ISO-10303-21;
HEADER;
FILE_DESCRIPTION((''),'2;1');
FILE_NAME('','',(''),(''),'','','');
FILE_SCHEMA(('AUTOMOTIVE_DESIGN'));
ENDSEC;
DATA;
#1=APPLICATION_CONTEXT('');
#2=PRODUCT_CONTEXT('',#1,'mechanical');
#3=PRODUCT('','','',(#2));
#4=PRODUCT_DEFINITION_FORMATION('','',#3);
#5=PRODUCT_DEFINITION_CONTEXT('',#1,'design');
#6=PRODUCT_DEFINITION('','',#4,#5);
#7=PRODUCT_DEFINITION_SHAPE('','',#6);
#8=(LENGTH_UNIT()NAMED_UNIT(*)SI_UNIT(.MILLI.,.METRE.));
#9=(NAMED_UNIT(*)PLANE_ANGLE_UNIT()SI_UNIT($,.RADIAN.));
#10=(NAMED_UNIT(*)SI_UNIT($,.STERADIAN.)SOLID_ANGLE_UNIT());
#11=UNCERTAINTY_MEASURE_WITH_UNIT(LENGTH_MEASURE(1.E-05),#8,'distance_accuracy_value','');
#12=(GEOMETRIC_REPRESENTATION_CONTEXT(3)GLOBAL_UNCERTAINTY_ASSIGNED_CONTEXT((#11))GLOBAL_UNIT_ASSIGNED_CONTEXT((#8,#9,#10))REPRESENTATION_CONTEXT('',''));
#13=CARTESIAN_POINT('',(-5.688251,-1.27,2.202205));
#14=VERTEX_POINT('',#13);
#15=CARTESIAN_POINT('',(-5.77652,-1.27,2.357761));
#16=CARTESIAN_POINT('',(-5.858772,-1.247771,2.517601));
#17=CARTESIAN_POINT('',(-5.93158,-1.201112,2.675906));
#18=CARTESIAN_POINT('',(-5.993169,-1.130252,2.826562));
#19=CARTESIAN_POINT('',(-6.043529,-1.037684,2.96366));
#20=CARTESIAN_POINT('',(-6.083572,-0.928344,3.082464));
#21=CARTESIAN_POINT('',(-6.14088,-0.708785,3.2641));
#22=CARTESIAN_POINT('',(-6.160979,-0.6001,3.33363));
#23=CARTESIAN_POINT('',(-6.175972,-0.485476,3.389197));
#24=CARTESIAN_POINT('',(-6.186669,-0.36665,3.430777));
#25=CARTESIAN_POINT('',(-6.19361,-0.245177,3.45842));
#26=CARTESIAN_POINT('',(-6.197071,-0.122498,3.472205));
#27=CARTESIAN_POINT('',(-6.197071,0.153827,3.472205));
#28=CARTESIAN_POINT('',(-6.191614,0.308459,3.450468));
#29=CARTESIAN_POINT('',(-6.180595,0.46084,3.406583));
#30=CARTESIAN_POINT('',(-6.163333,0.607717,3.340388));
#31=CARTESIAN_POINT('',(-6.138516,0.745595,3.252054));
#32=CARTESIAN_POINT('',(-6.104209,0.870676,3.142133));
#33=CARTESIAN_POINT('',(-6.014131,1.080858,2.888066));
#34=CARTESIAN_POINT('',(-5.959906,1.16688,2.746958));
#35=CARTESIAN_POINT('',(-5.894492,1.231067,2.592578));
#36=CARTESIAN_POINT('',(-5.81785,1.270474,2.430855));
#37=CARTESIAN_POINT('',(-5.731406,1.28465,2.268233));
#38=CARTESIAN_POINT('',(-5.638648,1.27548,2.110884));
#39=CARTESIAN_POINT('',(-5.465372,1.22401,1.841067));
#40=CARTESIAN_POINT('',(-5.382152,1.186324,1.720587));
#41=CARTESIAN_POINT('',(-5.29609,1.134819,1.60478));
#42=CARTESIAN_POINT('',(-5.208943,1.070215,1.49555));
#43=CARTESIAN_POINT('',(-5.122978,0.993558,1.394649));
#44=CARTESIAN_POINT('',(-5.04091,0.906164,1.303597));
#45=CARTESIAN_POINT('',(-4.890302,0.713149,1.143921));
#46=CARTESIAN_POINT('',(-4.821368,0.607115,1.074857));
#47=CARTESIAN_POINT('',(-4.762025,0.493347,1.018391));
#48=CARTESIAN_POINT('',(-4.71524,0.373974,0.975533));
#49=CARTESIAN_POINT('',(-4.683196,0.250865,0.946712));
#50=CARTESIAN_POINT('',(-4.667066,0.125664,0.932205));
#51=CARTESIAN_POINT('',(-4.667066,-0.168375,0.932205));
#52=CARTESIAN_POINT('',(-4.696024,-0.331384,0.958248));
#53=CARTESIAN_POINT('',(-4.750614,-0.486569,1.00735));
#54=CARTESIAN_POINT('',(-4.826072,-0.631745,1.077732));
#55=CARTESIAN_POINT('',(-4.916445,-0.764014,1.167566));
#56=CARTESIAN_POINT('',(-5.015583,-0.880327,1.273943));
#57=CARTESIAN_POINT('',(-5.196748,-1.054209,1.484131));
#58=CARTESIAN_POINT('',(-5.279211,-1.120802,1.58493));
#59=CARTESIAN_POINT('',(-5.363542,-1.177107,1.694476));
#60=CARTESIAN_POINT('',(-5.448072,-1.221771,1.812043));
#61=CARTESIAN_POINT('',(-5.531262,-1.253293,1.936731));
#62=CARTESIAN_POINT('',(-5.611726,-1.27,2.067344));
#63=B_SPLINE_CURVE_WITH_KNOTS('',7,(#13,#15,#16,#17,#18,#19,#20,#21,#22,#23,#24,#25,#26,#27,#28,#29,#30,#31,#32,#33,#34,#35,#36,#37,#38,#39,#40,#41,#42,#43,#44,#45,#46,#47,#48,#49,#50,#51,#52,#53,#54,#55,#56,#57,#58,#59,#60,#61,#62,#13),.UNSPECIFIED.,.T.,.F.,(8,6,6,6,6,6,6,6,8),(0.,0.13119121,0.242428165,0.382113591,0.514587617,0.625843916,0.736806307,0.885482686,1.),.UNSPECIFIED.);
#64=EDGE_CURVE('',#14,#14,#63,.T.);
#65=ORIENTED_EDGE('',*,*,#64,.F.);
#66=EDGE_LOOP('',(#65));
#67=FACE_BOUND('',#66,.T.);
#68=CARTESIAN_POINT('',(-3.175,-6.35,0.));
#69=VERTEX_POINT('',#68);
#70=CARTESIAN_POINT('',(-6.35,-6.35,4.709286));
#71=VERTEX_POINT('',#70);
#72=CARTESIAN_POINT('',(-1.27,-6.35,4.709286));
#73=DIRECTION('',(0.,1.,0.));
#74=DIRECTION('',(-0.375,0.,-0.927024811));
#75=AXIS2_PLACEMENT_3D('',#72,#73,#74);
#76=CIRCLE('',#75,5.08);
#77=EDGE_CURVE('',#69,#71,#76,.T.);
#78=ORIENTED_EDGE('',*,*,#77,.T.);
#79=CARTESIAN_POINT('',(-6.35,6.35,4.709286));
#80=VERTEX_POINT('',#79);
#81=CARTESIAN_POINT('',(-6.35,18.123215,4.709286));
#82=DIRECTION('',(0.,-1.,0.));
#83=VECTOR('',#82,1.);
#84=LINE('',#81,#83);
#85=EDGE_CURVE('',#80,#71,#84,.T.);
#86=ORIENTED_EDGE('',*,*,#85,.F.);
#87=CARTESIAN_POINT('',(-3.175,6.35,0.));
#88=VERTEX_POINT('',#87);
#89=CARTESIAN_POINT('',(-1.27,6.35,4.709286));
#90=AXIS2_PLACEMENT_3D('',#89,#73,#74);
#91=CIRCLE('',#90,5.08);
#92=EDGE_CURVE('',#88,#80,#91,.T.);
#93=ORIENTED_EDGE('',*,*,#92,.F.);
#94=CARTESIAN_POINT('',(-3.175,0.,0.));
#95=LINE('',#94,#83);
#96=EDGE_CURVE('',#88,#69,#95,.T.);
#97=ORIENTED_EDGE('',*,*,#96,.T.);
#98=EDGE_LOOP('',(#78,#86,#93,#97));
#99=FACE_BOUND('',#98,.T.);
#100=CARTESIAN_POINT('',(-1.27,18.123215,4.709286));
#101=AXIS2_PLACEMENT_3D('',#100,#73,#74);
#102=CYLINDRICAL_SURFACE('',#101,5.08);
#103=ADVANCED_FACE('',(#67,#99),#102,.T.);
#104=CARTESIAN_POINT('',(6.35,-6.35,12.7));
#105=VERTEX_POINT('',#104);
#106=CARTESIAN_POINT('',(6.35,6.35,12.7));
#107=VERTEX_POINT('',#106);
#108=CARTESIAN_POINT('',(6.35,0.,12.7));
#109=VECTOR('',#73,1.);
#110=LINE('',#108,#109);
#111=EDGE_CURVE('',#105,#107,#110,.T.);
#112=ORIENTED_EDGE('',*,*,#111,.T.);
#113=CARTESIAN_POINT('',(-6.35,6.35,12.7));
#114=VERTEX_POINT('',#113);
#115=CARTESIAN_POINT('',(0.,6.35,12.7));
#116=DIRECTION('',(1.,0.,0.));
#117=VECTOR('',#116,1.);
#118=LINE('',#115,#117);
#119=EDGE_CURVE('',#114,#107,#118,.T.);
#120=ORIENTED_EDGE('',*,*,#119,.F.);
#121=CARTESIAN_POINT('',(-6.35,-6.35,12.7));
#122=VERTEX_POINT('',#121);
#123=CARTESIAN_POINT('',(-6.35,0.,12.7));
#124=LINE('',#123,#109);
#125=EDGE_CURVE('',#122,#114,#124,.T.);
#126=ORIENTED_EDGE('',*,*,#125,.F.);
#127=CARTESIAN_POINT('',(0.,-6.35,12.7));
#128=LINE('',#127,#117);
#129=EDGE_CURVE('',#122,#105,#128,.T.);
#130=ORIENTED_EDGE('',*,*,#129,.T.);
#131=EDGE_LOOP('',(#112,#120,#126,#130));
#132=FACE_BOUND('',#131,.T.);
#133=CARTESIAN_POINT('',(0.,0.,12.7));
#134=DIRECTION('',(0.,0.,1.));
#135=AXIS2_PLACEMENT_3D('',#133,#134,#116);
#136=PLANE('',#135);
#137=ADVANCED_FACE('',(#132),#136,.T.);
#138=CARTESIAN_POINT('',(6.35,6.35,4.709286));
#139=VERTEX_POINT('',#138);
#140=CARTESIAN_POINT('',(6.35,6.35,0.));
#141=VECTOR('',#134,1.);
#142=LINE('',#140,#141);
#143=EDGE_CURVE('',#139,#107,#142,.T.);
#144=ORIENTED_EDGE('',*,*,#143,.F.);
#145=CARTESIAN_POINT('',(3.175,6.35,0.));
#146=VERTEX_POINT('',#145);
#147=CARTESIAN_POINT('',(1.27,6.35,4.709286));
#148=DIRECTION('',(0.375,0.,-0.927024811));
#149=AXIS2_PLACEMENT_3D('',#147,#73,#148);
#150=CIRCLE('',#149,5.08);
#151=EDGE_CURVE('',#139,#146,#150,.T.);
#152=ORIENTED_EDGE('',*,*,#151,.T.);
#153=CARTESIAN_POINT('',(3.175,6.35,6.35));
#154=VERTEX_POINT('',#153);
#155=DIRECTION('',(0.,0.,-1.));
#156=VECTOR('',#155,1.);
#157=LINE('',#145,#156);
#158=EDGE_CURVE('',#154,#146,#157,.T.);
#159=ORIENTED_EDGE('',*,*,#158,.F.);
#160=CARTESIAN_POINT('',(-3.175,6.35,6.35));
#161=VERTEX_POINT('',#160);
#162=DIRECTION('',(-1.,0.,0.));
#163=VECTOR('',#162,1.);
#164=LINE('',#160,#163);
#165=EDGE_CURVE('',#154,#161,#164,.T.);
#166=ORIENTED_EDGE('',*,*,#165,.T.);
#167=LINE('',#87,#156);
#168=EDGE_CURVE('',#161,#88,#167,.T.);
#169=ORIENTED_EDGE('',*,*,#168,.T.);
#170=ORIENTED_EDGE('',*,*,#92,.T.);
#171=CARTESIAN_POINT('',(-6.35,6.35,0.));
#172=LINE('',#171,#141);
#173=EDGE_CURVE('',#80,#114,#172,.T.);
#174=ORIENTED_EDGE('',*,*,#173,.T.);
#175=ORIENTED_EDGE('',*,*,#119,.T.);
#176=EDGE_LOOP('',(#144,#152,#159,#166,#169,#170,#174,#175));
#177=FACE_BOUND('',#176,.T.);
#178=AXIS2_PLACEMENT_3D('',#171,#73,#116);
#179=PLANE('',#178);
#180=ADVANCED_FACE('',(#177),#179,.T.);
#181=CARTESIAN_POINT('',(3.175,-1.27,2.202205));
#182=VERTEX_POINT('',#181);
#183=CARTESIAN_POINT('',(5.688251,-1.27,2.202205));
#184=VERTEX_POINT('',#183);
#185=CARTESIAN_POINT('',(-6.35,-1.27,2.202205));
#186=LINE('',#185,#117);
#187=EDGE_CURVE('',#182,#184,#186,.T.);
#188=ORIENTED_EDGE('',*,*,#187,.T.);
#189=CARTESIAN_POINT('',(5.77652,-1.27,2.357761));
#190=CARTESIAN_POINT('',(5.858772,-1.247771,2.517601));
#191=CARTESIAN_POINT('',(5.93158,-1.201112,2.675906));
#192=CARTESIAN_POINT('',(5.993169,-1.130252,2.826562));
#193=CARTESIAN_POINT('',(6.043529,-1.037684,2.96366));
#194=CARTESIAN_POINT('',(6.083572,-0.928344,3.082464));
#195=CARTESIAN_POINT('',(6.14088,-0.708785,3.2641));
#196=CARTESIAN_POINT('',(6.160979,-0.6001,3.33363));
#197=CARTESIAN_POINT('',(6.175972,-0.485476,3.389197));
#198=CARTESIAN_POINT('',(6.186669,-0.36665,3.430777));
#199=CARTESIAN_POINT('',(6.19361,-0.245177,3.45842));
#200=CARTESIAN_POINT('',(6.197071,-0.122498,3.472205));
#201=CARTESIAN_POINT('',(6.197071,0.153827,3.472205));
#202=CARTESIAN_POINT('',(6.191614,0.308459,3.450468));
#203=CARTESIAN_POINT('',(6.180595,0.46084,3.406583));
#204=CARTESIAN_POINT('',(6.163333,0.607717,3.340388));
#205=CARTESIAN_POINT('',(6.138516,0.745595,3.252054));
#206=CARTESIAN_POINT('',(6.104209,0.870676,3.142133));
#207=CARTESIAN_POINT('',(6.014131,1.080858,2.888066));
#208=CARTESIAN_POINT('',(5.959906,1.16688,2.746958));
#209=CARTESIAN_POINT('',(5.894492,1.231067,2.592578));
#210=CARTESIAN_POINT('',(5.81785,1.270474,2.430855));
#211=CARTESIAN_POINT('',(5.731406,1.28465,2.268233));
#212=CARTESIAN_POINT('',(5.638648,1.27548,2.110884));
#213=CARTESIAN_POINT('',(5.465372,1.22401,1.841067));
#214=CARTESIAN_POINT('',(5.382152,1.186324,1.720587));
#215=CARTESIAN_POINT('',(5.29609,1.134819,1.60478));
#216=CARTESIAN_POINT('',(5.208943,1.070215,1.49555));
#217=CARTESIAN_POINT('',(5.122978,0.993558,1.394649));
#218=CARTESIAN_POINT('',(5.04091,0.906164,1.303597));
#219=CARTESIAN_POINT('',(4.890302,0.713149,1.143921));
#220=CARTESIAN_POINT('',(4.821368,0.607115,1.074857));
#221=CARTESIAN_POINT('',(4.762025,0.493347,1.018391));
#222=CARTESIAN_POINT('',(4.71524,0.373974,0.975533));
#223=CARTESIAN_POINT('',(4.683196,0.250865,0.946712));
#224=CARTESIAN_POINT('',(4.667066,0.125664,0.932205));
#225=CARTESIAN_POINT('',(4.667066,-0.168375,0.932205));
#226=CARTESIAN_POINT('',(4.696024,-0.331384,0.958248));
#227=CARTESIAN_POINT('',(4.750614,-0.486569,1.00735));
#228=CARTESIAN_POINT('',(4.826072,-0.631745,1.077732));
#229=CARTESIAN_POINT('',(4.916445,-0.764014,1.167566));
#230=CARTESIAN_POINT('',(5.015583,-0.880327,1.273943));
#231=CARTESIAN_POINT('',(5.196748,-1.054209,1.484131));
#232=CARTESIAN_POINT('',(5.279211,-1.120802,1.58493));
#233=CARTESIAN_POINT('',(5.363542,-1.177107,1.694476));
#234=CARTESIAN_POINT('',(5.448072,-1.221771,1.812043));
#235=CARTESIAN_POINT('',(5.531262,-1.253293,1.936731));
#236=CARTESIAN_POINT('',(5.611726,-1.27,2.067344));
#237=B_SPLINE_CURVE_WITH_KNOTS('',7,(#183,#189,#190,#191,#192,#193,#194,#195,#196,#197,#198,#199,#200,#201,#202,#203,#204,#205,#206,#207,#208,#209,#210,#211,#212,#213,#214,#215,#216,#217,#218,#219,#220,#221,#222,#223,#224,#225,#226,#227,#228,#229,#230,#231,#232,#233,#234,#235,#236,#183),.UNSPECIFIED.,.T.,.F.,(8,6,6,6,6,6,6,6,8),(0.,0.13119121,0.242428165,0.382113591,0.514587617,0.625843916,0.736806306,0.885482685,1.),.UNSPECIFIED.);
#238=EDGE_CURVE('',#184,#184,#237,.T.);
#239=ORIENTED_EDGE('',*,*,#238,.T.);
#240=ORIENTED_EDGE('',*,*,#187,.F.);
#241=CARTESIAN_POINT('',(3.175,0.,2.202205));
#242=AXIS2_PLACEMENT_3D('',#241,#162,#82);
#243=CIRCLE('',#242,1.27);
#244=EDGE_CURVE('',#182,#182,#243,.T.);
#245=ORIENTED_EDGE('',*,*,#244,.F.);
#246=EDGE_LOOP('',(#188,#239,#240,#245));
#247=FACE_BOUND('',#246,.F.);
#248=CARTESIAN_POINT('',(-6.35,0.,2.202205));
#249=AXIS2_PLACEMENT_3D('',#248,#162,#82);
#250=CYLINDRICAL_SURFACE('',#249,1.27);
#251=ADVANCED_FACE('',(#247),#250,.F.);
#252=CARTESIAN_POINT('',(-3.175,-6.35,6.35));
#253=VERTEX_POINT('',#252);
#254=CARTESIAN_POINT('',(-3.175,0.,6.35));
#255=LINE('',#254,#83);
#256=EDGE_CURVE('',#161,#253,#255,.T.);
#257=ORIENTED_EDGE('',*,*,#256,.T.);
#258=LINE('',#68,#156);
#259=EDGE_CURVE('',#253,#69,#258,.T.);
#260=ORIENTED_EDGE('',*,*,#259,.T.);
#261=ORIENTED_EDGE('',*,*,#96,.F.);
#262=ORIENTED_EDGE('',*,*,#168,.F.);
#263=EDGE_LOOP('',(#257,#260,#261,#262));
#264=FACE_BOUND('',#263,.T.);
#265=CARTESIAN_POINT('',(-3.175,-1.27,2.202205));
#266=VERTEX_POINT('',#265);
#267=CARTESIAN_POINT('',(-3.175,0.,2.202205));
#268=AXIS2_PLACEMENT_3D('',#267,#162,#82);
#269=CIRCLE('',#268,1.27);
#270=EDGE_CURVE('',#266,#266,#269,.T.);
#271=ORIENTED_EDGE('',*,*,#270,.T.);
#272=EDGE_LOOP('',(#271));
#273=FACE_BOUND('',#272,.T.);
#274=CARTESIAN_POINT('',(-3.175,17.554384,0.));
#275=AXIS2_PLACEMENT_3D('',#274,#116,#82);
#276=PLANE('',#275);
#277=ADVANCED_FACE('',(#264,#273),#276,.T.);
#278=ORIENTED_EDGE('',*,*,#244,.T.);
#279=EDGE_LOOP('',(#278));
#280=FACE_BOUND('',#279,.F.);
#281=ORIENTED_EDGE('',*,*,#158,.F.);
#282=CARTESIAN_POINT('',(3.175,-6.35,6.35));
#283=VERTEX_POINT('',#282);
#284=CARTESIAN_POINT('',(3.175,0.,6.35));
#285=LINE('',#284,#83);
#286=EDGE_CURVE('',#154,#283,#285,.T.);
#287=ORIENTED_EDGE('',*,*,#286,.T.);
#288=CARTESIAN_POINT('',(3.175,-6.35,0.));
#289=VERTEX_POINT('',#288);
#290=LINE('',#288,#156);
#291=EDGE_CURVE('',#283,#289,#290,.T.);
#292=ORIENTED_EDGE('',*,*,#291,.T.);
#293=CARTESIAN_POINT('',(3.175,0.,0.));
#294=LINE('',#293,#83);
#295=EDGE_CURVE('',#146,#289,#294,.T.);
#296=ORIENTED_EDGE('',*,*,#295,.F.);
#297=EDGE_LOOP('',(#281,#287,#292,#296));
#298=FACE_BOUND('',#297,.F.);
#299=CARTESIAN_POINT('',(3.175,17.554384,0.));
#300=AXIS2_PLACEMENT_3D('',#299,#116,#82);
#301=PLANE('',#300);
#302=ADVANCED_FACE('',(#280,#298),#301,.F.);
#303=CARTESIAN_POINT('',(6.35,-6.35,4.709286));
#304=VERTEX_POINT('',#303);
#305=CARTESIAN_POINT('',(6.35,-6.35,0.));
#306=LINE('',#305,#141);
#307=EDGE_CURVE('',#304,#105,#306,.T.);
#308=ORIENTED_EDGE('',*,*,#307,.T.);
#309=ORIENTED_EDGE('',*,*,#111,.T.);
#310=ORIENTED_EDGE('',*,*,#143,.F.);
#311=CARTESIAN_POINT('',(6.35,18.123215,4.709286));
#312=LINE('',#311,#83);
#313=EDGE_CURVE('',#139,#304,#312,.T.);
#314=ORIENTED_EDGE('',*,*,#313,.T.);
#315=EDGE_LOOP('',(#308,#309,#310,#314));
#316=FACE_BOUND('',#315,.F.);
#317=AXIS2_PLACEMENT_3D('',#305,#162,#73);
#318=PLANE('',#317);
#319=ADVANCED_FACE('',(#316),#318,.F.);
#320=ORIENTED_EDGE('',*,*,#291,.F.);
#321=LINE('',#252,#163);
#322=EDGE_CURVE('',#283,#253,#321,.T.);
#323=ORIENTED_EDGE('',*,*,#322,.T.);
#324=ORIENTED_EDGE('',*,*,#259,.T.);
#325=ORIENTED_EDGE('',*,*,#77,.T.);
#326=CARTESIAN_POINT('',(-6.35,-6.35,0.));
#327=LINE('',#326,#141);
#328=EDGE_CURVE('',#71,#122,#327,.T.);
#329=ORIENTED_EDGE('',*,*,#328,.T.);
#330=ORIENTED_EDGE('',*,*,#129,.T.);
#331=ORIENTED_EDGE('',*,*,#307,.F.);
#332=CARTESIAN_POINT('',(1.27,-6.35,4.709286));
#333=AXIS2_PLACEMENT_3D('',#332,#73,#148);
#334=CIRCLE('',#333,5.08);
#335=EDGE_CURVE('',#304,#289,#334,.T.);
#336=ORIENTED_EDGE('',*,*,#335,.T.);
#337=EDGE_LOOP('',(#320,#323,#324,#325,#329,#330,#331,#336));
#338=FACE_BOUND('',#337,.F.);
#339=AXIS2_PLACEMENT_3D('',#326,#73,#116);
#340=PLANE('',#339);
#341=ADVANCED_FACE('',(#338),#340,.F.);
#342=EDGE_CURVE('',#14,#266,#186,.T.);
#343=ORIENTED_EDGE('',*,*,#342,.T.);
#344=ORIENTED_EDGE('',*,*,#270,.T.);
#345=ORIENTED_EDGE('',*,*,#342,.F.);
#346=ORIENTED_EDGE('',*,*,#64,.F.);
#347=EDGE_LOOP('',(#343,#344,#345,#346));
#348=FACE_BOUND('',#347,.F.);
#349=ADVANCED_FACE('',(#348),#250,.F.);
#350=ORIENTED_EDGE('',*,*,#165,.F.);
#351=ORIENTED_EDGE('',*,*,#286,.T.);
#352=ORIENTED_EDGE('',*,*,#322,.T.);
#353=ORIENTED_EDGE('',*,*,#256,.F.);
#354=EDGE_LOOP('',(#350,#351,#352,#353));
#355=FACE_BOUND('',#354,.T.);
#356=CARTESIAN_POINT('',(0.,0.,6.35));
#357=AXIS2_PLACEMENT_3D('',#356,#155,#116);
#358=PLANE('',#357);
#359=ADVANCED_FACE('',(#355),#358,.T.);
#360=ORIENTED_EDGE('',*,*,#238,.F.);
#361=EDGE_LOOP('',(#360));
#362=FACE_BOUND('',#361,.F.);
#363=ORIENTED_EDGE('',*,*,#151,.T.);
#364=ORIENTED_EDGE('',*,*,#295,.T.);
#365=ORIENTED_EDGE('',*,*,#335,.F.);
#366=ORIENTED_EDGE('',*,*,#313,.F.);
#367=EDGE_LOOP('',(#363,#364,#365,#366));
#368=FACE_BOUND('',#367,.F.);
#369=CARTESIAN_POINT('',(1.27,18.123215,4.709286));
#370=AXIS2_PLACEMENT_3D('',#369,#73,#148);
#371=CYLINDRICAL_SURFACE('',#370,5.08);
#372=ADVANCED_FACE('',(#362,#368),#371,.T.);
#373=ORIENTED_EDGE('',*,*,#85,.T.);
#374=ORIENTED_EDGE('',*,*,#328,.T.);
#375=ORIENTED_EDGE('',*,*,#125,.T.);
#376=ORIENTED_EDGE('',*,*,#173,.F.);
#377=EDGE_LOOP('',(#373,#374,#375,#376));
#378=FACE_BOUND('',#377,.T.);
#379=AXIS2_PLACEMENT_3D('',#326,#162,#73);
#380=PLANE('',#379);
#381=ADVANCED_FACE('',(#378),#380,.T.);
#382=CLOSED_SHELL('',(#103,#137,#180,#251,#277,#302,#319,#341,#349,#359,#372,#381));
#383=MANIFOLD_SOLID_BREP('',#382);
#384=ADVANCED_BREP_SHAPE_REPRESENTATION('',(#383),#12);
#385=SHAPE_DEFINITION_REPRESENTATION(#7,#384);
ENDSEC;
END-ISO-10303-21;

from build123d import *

# Parameters (mm, degrees)
F0_W        = 12.7
F0_H        = 12.7
F1_DEPTH    = 12.7
F2_W        = 6.35
F2_H        = 35.1087670878
F3_DEPTH    = 6.35
F4_R        = 1.27
F5_DEPTH    = 25.4
F6_T1_DEPTH = 36.2464301965


# Not quite as in the source:
# - a fillet or chamfer that OpenCascade refuses, or shapes differently, is made with other operations: its cross-section is extruded or revolved along the edge and cut away or added


with BuildPart() as f1:
    # F0 (on Top) → F1 (new body)
    with BuildSketch(Plane.XY):
        Rectangle(F0_W, F0_H)
    extrude(amount=F1_DEPTH)

    # F2 (on face) → F3 (cut)
    with BuildSketch(Plane(origin=(0, 0, 0), x_dir=(1, 0, 0), z_dir=(0, 0, -1))):
        Rectangle(F2_W, F2_H)
    extrude(amount=-F3_DEPTH, mode=Mode.SUBTRACT)

    # F4 (on face) → F5 (cut)
    with BuildSketch(Plane(origin=(-6.35, 0, 0), x_dir=(0, -1, 0), z_dir=(-1, 0, 0))):
        with Locations((0, 2.2022052582)):
            Circle(F4_R)
    extrude(amount=-F5_DEPTH, mode=Mode.SUBTRACT)

    # F6: fillet of radius 5.08 on 2 edges, made by hand

    # F6_s2 → F6_t1 (cut)
    with BuildSketch(Plane.XZ.offset(-18.1232150983)):
        with BuildLine():
            ThreePointArc((-3.175, 0), (-5.4821134838, 1.8694797079), (-6.35, 4.7092860393))
            Line((-6.35, 4.7092860393), (-6.35, 0))
            Line((-6.35, 0), (-3.175, 0))
        make_face()
        with BuildLine():
            ThreePointArc((3.175, 0), (5.4821134838, 1.8694797079), (6.35, 4.7092860393))
            Line((6.35, 4.7092860393), (6.35, 0))
            Line((6.35, 0), (3.175, 0))
        make_face()
    extrude(amount=F6_T1_DEPTH, mode=Mode.SUBTRACT)


solid = f1.part
